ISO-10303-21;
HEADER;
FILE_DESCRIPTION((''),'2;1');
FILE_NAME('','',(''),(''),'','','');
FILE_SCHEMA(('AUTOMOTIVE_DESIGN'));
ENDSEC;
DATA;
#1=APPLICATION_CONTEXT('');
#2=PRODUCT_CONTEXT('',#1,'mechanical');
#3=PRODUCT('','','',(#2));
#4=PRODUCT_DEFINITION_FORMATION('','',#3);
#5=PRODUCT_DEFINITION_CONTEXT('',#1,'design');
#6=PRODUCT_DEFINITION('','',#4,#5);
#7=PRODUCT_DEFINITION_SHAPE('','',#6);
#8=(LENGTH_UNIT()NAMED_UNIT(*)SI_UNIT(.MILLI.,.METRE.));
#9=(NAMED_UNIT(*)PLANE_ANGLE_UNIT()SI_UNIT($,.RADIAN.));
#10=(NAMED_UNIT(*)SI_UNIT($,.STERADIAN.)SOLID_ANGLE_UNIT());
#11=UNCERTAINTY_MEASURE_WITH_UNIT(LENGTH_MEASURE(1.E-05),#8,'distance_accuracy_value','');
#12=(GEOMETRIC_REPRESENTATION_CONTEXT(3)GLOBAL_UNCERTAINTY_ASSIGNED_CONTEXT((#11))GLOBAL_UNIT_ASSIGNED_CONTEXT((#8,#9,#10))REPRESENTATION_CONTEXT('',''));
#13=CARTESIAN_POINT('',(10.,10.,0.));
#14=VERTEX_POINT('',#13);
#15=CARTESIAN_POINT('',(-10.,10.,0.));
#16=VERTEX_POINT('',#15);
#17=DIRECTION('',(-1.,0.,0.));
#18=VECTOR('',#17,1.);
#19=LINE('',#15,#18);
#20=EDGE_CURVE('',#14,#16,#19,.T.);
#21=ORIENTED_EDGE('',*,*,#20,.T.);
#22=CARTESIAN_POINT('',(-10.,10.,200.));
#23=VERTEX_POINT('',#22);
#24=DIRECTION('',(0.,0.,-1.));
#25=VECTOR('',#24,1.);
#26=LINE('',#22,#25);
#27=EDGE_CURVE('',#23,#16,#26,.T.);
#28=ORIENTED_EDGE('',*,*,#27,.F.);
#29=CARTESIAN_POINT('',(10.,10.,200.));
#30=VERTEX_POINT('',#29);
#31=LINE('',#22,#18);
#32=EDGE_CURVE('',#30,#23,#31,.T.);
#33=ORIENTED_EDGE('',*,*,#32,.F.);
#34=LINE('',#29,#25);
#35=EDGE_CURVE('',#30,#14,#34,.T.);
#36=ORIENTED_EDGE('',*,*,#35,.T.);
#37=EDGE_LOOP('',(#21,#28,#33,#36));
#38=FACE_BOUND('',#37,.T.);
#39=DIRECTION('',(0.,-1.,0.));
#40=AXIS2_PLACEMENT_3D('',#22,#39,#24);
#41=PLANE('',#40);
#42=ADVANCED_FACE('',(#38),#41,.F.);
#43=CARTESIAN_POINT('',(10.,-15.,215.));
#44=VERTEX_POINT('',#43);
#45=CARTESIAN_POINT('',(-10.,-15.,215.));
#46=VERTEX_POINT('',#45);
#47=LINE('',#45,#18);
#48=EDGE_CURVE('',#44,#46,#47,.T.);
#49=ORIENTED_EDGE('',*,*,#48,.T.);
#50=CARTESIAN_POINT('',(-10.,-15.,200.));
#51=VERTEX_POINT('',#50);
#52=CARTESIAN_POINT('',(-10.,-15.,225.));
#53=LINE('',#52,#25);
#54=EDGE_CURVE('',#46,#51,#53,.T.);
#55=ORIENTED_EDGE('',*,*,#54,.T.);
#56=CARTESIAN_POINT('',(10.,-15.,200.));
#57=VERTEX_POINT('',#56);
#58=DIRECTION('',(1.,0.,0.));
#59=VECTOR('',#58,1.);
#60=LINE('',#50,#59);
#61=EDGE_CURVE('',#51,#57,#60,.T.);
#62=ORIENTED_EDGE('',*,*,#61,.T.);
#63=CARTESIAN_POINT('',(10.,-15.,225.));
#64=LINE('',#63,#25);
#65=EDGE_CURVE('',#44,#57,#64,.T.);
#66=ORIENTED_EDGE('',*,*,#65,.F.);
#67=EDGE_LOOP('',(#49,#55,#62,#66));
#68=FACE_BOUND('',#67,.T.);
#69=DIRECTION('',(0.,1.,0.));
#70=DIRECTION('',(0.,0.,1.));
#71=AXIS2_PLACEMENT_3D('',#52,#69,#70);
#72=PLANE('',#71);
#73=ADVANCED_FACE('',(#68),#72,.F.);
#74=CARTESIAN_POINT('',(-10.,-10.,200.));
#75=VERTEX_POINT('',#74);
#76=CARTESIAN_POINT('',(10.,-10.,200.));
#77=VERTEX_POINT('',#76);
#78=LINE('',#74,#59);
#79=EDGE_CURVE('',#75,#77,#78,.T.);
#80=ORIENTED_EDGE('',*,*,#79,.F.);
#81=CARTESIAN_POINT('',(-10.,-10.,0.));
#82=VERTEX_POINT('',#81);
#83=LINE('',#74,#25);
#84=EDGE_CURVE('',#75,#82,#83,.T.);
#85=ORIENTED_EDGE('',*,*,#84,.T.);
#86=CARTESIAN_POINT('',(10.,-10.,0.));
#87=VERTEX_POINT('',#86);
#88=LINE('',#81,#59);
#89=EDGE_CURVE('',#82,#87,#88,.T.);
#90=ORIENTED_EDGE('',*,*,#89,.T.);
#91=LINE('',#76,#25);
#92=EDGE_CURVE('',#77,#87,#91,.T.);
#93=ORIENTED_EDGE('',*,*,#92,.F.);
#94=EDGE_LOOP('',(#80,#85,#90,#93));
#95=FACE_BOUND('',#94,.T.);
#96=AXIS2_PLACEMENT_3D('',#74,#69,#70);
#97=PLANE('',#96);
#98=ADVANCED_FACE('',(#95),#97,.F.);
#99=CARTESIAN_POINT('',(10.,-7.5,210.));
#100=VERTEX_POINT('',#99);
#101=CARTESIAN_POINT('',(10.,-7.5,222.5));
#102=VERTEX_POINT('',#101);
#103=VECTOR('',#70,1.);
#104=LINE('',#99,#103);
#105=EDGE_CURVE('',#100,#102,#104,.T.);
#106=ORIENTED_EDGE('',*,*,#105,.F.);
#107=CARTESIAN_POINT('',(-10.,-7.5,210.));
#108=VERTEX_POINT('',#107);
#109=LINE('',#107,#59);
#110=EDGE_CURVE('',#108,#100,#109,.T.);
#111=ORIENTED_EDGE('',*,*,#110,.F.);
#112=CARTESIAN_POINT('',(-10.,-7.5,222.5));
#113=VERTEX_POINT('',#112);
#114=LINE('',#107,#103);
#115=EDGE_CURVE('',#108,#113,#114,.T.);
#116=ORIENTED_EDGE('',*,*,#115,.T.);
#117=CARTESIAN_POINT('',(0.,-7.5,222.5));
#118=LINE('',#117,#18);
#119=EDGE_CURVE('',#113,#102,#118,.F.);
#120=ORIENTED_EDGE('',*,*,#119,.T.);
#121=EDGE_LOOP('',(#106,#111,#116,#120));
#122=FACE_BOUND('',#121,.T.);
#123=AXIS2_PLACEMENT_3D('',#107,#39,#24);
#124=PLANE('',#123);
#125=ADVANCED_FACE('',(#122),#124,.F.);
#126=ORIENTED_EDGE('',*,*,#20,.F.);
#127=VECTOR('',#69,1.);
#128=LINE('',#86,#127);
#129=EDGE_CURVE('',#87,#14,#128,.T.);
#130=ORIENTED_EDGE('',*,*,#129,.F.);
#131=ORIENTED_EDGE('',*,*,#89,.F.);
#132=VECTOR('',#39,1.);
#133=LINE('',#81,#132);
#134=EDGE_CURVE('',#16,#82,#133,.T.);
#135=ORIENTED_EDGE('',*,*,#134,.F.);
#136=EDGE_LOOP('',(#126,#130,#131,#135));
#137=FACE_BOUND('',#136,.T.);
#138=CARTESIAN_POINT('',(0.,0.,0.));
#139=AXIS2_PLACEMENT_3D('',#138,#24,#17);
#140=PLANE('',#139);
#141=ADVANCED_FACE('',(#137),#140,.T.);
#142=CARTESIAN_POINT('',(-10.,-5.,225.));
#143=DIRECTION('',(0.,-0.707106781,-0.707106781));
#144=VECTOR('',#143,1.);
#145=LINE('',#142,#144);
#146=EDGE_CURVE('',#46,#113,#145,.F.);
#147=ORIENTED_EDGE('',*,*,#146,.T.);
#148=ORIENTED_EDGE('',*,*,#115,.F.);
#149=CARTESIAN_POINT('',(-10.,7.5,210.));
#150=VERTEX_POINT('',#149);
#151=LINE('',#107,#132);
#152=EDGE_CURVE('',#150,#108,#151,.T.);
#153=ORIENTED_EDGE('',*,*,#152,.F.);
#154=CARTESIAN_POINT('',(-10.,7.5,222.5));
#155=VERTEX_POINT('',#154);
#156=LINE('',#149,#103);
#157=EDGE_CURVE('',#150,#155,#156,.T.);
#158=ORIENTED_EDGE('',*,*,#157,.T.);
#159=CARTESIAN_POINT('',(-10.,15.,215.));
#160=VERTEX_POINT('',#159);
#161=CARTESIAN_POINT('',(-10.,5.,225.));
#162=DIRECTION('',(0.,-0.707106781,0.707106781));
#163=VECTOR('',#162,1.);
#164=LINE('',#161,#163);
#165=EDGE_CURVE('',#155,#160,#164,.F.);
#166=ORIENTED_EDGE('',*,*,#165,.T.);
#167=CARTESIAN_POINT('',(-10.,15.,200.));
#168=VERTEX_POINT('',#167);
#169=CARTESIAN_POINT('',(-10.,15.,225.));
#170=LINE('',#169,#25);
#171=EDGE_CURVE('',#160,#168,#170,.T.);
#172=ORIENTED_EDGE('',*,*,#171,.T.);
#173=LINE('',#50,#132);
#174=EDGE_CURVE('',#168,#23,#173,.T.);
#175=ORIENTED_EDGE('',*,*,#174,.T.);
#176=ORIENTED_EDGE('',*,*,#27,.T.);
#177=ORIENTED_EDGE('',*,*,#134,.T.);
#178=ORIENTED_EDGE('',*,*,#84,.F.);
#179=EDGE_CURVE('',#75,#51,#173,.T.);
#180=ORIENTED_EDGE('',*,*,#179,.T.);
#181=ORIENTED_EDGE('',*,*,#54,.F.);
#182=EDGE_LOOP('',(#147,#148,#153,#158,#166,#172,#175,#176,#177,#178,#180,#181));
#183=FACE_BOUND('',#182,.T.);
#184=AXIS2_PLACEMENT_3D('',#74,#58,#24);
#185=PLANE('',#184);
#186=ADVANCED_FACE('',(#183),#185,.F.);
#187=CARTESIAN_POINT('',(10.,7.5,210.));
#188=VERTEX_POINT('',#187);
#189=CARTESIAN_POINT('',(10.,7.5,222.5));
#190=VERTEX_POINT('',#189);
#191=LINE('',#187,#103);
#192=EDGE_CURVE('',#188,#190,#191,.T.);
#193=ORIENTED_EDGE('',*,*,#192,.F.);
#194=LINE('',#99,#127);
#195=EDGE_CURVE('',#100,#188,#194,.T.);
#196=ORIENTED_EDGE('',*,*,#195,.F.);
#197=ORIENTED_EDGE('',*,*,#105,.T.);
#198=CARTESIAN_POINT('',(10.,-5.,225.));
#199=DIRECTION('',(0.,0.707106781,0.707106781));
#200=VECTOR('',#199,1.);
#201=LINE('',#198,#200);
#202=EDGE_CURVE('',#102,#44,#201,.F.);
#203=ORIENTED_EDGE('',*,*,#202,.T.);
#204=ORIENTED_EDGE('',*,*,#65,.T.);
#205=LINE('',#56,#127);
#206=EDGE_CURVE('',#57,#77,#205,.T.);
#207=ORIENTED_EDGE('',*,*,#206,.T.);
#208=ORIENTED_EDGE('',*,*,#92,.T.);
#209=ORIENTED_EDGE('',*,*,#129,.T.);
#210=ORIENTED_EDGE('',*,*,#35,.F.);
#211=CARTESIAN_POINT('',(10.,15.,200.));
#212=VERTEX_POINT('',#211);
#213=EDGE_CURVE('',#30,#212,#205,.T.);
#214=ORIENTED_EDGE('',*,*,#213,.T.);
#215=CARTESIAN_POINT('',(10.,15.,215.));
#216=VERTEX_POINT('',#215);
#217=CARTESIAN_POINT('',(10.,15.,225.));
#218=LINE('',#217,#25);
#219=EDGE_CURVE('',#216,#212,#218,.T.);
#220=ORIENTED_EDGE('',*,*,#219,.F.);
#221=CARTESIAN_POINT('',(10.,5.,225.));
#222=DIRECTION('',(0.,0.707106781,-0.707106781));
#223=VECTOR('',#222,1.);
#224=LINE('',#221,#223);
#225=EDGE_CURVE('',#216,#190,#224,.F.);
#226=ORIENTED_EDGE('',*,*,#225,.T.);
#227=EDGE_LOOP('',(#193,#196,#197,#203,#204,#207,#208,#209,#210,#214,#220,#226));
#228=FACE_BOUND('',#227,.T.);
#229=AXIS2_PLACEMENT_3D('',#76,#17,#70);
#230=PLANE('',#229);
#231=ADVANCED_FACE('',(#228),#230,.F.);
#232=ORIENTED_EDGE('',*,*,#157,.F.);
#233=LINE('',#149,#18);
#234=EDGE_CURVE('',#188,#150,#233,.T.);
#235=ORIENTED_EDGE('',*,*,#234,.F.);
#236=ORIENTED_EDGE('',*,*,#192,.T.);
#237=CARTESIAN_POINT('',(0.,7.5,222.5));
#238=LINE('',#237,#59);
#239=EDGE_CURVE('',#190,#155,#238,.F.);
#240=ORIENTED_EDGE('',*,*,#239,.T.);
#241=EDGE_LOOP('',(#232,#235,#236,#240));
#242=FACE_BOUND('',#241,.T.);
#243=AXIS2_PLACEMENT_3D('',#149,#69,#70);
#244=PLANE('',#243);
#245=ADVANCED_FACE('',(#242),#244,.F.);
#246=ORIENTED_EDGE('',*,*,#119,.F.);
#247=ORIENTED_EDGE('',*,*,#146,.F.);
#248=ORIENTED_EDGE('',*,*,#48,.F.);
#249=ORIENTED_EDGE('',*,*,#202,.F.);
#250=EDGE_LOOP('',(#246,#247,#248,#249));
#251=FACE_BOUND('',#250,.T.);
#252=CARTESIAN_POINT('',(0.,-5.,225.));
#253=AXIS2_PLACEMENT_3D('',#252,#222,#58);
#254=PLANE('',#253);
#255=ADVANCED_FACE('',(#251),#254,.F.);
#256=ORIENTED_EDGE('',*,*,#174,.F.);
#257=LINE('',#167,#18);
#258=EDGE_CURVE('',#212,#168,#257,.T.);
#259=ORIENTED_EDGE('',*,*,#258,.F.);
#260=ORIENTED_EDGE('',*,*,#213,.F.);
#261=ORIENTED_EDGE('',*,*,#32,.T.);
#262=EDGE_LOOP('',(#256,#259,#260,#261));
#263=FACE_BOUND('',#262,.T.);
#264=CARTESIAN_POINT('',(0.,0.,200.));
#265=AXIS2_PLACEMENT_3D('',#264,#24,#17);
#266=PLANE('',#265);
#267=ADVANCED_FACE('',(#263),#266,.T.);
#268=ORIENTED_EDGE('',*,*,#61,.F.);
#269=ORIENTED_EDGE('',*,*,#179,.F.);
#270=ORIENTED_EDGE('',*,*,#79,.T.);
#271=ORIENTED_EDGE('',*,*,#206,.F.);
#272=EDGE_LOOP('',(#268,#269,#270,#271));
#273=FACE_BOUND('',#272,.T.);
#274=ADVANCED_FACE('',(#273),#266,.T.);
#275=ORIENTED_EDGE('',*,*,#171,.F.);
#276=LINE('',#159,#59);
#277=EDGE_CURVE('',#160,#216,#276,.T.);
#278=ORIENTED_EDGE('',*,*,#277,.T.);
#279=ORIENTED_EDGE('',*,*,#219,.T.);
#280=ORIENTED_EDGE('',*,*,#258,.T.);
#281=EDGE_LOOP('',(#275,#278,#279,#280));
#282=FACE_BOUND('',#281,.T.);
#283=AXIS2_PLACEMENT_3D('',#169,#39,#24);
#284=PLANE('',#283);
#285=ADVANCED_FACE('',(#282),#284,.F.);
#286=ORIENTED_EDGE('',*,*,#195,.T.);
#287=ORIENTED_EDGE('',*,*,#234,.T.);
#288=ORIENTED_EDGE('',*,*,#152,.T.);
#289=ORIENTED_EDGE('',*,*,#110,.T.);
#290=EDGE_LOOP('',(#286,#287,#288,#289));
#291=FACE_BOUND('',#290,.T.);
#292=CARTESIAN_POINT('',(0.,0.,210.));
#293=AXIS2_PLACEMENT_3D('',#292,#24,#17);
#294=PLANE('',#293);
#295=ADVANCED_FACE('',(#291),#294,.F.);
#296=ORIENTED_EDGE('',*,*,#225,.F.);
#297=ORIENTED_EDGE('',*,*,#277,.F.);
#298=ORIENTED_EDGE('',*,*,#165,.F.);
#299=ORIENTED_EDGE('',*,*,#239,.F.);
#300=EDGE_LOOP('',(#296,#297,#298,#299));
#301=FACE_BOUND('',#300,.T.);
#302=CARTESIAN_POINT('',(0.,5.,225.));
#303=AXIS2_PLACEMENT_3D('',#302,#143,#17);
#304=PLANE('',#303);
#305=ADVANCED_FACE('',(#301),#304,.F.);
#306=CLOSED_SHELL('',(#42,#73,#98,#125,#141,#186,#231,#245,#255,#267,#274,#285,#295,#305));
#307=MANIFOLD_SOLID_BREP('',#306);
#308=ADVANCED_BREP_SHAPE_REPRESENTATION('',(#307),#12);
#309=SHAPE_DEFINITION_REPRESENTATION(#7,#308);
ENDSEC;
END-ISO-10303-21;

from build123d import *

# Parameters (mm, degrees)
SKETCH1_W           = 20
SKETCH1_H           = 20
BOSS_EXTRUDE1_DEPTH = 200
SKETCH2_W           = 20
SKETCH2_H           = 30
BOSS_EXTRUDE2_DEPTH = 25
SKETCH3_W           = 20
SKETCH3_H           = 15
CUT_EXTRUDE1_DEPTH  = 15
CHAMFER1_SIZE       = 10
CHAMFER3_SIZE       = 10


with BuildPart() as part:
    # Sketch1 → Boss-Extrude1 (new body)
    with BuildSketch(Plane.XY):
        Rectangle(SKETCH1_W, SKETCH1_H)
    extrude(amount=BOSS_EXTRUDE1_DEPTH)

    # Sketch2 → Boss-Extrude2 (add)
    with BuildSketch(Plane.XY.offset(200)):
        Rectangle(SKETCH2_W, SKETCH2_H)
    extrude(amount=BOSS_EXTRUDE2_DEPTH)

    # Sketch3 → Cut-Extrude1 (cut)
    with BuildSketch(Plane.XY.offset(225)):
        Rectangle(SKETCH3_W, SKETCH3_H)
    extrude(amount=-CUT_EXTRUDE1_DEPTH, mode=Mode.SUBTRACT)

    # Chamfer1
    # the kernel refuses this chamfer: 10 mm, written as the material it takes off along each edge
    with BuildSketch(Plane(origin=(35.71682988, 15, 225), x_dir=(0, -0.9996219169112968, 0.0274958766105877), z_dir=(-1, 0, 0))) as chamfer1_piece_1:
        Polygon((CHAMFER1_SIZE * 0.999621916911, -CHAMFER1_SIZE * 0.0274958766106), (-CHAMFER1_SIZE * 0.0274958766106, -CHAMFER1_SIZE * 0.999621916911), (0, 0), align=None)
    extrude(amount=71.433659759, mode=Mode.SUBTRACT)

    # Chamfer3
    # the kernel refuses this chamfer: 10 mm, written as the material it takes off along each edge
    with BuildSketch(Plane(origin=(-35.71682988, -15, 225), x_dir=(0, -0.027495876610586282, -0.9996219169112968), z_dir=(1, 0, 0))) as chamfer3_piece_1:
        Polygon((CHAMFER3_SIZE * 0.999621916911, CHAMFER3_SIZE * 0.0274958766106), (-CHAMFER3_SIZE * 0.0274958766106, CHAMFER3_SIZE * 0.999621916911), (0, 0), align=None)
    extrude(amount=71.433659759, mode=Mode.SUBTRACT)


solid = part.part
